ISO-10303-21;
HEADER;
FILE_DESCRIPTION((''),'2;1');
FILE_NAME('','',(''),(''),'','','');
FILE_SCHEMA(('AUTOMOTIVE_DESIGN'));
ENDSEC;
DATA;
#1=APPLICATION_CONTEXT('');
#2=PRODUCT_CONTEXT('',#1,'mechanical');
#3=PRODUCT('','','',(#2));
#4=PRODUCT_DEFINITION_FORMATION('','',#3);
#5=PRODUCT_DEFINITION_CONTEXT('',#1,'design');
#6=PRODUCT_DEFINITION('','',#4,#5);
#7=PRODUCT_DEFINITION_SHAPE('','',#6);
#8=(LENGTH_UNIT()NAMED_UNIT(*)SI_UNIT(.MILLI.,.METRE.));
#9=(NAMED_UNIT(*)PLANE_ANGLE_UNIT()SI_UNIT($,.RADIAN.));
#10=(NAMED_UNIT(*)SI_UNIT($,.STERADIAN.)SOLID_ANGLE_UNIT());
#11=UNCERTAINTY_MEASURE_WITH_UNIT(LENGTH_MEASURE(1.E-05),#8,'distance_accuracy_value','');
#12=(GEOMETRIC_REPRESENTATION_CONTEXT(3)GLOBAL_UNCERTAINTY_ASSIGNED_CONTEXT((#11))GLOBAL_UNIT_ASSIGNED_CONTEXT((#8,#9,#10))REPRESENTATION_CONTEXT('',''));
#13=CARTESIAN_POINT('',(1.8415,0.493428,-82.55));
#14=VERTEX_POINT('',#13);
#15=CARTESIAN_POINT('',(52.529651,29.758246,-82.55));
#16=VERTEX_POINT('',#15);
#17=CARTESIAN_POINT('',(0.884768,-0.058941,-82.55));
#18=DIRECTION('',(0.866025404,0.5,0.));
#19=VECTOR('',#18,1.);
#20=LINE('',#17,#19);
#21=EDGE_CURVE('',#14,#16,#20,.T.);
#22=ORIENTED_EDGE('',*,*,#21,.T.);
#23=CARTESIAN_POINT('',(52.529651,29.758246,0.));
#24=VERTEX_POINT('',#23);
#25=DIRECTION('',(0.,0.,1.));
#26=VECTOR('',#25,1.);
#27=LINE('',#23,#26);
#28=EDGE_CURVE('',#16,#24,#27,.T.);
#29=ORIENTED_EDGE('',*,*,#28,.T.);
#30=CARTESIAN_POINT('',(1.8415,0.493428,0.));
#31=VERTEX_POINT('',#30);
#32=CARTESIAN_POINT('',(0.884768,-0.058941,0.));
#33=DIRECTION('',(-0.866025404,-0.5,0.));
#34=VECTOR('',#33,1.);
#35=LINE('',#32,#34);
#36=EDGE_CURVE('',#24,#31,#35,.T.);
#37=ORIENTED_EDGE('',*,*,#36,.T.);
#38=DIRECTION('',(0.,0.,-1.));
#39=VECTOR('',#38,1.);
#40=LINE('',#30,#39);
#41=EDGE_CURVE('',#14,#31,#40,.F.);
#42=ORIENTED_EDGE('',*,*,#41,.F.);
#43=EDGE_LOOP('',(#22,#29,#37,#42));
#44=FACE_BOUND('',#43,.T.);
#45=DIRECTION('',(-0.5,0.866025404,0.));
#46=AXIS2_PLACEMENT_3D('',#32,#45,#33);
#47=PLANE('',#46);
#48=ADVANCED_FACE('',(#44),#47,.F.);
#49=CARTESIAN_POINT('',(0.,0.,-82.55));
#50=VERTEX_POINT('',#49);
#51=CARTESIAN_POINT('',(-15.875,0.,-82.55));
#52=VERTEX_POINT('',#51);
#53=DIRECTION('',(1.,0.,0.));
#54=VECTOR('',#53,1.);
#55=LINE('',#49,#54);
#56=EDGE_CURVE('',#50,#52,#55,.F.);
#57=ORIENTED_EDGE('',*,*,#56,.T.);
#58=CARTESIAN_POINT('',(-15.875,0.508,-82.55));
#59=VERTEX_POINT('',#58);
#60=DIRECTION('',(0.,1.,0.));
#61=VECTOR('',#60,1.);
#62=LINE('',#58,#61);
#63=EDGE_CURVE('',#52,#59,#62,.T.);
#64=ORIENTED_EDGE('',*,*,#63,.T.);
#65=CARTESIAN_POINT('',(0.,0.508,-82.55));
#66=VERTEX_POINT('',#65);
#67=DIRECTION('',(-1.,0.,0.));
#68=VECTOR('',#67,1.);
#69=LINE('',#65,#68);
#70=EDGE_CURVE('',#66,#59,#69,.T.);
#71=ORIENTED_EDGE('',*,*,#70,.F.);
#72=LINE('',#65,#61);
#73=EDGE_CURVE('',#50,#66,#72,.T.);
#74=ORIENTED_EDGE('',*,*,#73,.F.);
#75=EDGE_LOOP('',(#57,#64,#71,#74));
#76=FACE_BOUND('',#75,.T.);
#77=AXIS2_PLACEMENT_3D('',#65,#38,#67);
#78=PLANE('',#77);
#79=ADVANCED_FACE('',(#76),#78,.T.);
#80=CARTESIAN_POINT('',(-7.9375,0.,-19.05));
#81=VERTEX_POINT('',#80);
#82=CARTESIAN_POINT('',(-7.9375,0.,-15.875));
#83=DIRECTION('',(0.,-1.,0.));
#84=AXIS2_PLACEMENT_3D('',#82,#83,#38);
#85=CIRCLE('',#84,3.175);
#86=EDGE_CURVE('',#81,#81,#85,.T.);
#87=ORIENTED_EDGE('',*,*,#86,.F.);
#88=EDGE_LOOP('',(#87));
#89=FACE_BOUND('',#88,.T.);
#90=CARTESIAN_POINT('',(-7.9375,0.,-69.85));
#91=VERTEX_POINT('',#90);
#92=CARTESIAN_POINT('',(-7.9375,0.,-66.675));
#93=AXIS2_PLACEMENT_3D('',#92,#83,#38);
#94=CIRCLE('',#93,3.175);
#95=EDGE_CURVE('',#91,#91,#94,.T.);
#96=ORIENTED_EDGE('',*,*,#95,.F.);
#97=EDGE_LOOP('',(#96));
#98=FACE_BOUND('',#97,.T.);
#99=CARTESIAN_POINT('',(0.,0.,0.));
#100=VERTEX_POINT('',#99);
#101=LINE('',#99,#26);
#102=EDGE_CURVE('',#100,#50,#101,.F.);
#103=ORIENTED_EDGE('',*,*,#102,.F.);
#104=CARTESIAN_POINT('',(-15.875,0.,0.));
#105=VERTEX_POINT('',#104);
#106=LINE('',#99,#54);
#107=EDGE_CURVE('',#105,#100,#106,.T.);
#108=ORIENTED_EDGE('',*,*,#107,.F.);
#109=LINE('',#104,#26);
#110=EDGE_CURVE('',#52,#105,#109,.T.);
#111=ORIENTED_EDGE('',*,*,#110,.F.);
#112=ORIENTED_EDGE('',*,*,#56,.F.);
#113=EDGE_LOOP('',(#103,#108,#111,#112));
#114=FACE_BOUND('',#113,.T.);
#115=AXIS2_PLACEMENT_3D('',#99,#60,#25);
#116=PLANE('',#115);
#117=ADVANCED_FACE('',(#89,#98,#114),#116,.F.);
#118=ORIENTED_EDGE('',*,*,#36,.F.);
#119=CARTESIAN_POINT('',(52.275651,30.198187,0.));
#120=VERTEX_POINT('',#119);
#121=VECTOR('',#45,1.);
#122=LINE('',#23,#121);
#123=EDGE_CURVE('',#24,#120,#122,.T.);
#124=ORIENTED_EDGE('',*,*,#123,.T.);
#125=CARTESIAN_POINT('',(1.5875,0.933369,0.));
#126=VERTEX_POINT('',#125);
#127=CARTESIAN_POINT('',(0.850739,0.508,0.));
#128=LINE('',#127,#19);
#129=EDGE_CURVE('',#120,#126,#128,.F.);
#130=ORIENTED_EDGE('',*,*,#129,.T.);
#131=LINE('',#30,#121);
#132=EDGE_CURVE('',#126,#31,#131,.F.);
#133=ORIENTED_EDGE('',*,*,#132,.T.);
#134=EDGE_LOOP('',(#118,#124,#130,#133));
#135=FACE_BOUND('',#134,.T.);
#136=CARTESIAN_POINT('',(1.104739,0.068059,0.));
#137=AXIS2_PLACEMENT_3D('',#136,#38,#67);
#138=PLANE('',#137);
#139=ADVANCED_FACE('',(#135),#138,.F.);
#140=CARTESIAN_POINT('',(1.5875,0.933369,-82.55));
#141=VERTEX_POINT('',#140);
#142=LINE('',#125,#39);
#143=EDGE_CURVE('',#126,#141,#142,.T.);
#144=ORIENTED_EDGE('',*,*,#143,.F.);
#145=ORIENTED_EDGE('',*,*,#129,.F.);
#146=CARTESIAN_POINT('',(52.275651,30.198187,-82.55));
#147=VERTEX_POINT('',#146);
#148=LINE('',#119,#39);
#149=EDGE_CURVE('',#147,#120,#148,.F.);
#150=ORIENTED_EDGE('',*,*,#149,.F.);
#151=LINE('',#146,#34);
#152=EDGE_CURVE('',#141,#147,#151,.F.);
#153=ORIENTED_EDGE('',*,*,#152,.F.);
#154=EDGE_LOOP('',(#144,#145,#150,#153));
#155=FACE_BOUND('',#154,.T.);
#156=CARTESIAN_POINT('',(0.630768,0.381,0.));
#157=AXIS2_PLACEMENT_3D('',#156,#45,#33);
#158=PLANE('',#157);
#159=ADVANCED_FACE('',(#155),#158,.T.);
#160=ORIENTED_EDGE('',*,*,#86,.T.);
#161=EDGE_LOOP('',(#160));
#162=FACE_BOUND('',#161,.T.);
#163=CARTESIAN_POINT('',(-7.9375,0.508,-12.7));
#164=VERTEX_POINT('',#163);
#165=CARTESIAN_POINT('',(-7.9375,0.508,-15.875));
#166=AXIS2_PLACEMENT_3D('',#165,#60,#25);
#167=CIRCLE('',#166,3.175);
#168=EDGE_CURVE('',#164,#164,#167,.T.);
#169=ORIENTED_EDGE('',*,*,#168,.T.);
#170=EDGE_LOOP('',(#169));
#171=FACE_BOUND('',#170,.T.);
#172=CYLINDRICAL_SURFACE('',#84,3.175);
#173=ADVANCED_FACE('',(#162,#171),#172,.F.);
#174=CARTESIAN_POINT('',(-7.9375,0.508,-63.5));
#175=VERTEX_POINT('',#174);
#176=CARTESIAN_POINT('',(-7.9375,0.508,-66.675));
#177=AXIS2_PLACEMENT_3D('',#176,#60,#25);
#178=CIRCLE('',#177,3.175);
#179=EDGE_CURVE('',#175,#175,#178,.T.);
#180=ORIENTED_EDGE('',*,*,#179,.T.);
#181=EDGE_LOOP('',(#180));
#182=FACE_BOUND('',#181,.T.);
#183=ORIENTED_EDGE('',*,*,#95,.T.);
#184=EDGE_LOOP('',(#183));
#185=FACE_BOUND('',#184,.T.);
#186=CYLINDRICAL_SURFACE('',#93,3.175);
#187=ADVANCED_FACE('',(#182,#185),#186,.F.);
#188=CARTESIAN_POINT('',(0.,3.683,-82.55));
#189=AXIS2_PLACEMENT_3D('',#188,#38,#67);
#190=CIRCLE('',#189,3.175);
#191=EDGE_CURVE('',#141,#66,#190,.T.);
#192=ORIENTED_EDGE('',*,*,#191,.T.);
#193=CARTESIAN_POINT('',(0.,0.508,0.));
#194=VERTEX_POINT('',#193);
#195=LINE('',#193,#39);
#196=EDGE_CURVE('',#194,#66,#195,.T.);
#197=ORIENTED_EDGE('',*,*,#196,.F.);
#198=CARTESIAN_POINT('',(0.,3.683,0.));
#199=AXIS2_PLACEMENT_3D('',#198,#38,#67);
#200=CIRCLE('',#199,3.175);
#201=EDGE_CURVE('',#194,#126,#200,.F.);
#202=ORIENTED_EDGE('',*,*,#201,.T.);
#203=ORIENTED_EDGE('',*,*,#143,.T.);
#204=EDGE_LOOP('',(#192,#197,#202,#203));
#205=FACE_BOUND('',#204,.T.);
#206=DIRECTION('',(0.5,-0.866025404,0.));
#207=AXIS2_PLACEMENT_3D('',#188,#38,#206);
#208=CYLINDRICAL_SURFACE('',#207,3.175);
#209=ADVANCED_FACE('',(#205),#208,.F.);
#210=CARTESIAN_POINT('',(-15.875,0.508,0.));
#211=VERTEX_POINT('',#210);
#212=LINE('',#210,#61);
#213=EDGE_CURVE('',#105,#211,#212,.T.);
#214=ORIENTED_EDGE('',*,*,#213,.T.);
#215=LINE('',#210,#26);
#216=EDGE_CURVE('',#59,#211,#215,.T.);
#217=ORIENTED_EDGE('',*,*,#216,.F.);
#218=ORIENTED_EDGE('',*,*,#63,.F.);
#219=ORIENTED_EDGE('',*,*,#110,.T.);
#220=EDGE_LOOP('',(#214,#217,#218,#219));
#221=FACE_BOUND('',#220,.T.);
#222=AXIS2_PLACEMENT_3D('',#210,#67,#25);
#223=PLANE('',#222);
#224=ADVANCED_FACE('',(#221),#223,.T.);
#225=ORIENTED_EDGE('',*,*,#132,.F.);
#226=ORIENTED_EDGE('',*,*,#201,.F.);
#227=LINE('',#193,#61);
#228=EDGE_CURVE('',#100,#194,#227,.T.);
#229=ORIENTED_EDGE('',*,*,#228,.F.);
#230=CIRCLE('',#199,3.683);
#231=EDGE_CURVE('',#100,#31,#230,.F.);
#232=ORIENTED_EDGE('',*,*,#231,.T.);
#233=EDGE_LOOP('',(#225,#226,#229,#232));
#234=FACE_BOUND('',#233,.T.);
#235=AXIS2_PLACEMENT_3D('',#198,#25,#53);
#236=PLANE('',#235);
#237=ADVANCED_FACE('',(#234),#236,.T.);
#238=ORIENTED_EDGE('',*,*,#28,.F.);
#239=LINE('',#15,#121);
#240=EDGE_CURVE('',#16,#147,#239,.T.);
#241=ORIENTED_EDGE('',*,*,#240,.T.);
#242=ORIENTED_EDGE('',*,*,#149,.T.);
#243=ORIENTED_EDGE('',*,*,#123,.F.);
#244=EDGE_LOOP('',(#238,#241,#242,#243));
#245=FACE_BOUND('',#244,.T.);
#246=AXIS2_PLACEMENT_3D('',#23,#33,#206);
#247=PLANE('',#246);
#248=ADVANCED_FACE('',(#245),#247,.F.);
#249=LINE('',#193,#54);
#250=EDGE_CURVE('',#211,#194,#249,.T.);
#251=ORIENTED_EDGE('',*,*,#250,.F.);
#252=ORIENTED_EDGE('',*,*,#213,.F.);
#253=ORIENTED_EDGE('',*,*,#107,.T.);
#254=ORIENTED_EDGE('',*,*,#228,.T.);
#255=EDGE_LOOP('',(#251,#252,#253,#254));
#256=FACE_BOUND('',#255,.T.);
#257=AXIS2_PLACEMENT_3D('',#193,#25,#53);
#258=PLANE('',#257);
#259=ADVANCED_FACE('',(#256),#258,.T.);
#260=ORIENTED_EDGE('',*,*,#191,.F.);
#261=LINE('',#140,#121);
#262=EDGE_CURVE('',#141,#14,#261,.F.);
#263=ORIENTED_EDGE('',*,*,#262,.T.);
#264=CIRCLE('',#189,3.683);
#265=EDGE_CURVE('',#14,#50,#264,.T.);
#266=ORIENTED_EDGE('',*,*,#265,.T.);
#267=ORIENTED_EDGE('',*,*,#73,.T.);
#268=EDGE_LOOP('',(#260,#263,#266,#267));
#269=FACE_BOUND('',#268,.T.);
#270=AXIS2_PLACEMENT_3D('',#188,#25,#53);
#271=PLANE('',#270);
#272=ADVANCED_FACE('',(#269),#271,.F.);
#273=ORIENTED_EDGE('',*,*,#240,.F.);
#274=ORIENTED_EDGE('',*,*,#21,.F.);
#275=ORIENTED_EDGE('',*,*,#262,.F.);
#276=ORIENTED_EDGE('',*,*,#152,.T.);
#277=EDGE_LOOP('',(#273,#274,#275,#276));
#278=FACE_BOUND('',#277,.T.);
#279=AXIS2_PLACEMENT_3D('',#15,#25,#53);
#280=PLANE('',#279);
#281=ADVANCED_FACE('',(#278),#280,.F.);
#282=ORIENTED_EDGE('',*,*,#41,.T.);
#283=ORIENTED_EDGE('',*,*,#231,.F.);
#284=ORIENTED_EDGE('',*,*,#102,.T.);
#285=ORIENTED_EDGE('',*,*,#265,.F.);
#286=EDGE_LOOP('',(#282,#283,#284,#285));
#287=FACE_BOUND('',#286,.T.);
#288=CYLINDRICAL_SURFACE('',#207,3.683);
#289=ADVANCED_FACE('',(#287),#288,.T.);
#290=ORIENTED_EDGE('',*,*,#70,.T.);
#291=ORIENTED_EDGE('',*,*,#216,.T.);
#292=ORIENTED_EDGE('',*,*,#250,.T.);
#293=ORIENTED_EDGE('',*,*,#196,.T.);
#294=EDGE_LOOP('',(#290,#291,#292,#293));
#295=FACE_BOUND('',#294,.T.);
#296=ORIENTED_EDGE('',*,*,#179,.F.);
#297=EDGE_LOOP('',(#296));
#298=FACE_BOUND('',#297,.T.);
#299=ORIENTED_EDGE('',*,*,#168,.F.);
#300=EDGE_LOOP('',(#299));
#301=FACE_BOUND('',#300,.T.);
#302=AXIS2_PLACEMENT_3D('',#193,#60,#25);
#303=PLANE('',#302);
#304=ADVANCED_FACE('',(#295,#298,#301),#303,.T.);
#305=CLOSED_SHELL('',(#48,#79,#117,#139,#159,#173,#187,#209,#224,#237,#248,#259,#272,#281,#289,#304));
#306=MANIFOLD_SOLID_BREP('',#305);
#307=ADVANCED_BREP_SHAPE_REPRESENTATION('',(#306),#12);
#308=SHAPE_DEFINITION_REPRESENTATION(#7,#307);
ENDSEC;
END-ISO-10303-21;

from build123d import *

# Parameters (mm, degrees)
SKETCH2_W                   = 15.875
SKETCH2_H                   = 82.55
BOSS_EXTRUDE2_DEPTH         = 0.508
EDGE_FLANGE2_DEPTH          = 82.55
F_1_4_0_25_DIAMETER_HOLE1_D = 6.35


# Sheet-metal steps are written as plain solids
with BuildPart() as part:
    # Sketch2 → Boss-Extrude2 (new body)
    with BuildSketch(Plane(origin=(0, 0, 0), x_dir=(1, 0, 0), z_dir=(0, 1, 0))):
        with Locations((-7.9375, 41.275)):
            Rectangle(SKETCH2_W, SKETCH2_H)
    extrude(amount=BOSS_EXTRUDE2_DEPTH)

    # Edge-Flange2 section (across the edge) → Edge-Flange2 (add)
    with BuildSketch(Plane(origin=(0.850738686, 0.508, 0), x_dir=(-0.49999999999999495, 0.8660254037844416, 0), z_dir=(0, 0, -1))):
        with BuildLine():
            Line((-0.508, 0.850738686), (-0.508, 59.380374))
            Line((-0.508, 59.380374), (0, 59.380374))
            Line((0, 59.380374), (0, 0.850738686))
            ThreePointArc((0, 0.850738686), (0.108185502, 0.028988218), (0.425369343, -0.736761314))
            Line((0.425369343, -0.736761314), (-0.014571562, -0.990761314))
            ThreePointArc((-0.014571562, -0.990761314), (-0.382504818, -0.102491857), (-0.508, 0.850738686))
        make_face()
    extrude(amount=EDGE_FLANGE2_DEPTH)

    # 1/4 (0.25) Diameter Hole1 (through all)
    with Locations(Plane(origin=(0, 0, 0), x_dir=(-1, 0, 0), z_dir=(0, -1, 0))):
        with Locations((7.9375, 15.875), (7.9375, 66.675)):
            Hole(F_1_4_0_25_DIAMETER_HOLE1_D / 2)


solid = part.part
